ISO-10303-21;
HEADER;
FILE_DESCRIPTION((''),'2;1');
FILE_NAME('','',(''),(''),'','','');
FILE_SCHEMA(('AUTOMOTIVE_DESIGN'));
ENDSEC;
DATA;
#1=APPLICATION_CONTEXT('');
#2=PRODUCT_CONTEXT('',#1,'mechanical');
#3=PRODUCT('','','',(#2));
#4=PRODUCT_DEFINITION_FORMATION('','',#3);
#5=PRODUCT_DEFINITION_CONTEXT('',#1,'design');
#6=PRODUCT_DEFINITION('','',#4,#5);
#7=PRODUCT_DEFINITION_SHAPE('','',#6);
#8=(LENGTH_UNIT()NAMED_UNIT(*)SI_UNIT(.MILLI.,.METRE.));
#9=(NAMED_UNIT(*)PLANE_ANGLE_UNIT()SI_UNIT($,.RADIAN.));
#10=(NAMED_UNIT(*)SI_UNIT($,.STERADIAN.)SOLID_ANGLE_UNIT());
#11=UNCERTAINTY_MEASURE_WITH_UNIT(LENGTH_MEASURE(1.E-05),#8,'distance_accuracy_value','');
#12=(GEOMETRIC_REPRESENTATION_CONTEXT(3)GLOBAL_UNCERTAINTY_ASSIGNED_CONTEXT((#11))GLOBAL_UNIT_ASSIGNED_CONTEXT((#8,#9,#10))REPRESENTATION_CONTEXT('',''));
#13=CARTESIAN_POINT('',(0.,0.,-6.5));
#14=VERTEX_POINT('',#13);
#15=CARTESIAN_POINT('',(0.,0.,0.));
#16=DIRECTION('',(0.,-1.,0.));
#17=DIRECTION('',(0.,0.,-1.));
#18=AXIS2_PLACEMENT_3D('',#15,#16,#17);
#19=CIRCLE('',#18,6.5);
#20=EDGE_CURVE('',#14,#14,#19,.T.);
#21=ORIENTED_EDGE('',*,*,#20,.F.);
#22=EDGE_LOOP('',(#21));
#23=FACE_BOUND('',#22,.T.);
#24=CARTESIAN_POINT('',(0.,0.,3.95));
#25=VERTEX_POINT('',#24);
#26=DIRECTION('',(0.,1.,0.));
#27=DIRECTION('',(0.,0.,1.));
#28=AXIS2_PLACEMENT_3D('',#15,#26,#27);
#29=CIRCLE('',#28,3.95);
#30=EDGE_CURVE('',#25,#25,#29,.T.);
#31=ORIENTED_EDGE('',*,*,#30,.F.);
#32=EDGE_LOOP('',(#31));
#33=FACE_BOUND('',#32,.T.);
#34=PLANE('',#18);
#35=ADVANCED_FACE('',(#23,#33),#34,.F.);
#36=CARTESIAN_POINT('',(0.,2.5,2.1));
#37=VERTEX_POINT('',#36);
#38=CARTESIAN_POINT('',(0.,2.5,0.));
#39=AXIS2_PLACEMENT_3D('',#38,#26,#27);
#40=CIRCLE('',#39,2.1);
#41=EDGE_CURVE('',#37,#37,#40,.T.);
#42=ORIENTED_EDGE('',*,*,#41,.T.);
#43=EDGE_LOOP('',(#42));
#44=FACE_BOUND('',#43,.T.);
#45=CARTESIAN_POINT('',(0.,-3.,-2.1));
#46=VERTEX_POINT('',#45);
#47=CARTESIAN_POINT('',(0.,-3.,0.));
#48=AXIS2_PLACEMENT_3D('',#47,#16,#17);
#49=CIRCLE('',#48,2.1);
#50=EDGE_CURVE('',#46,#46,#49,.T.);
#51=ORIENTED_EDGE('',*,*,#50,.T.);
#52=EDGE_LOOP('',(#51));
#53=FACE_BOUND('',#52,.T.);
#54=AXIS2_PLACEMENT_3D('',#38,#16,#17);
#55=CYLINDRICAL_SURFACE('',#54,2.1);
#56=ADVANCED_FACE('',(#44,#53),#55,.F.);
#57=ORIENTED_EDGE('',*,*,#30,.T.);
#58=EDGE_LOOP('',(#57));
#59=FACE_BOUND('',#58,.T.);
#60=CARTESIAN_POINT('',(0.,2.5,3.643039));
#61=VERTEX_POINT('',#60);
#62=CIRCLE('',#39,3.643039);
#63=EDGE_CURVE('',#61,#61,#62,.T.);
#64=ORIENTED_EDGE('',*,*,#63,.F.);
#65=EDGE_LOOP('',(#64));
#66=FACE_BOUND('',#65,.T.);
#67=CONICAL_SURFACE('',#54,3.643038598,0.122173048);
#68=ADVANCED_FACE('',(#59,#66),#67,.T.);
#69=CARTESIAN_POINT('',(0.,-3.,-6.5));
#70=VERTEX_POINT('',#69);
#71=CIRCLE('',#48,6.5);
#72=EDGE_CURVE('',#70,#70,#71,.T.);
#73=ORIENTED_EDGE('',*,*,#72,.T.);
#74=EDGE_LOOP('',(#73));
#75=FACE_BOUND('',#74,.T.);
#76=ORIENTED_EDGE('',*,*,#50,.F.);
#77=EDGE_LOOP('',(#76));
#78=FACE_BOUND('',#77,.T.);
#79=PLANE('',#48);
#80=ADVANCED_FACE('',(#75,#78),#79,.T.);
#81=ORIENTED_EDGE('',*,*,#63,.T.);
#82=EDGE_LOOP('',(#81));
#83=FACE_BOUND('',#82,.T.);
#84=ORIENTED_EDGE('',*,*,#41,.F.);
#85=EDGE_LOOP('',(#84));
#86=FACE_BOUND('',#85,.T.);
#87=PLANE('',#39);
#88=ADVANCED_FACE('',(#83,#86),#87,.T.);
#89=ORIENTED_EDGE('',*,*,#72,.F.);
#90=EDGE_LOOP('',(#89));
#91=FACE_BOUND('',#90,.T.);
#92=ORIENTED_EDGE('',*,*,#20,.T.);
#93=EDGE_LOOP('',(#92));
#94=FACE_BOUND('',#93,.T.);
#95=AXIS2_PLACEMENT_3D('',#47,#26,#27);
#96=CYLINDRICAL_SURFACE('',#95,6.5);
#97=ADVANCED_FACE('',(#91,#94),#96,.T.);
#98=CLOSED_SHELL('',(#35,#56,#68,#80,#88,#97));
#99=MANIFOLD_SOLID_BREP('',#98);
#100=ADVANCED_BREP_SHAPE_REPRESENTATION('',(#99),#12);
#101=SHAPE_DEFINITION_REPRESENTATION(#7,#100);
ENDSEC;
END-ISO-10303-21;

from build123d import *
from build123d.topology import SkipClean

# Parameters (mm, degrees)
SKETCH1_R           = 3.95
SKETCH1_R_2         = 2.1
BOSS_EXTRUDE1_DEPTH = 2.5
BOSS_EXTRUDE2_START = 3
SKETCH2_R           = 6.5
SKETCH2_R_2         = 2.1
BOSS_EXTRUDE2_DEPTH = 3
CHAMFER1_SIZE       = 2.5
CHAMFER1_SIZE_2     = 0.306961402


with BuildPart() as part:
    # Sketch1 → Boss-Extrude1 (new body)
    with BuildSketch(Plane(origin=(0, 0, 0), x_dir=(1, 0, 0), z_dir=(0, 1, 0))):
        with Locations(Location((0, 0, 0), (0, 0, 270))):
            Circle(SKETCH1_R)
        with Locations(Location((0, 0, 0), (0, 0, 270))):
            Circle(SKETCH1_R_2, mode=Mode.SUBTRACT)
    extrude(amount=BOSS_EXTRUDE1_DEPTH)

    # Sketch2 → Boss-Extrude2 (add)
    with SkipClean():  # the faces are left unmerged after this step: merging them gives an invalid solid
        with BuildSketch(Plane.XZ.offset(BOSS_EXTRUDE2_START)):
            with Locations(Location((0, 0, 0), (0, 0, 270))):
                Circle(SKETCH2_R)
            with Locations(Location((0, 0, 0), (0, 0, 270))):
                Circle(SKETCH2_R_2, mode=Mode.SUBTRACT)
        extrude(amount=-BOSS_EXTRUDE2_DEPTH)

    # Chamfer1
    # the kernel refuses this chamfer: 2.5, 0.306961402 mm, written as the material it takes off along each edge
    with BuildSketch(Plane(origin=(0, 2.5, 0), x_dir=(0, 0, 1), z_dir=(-1, 0, 0))) as chamfer1_piece_1_section:
        Polygon((3.95, -CHAMFER1_SIZE), (3.95 - CHAMFER1_SIZE_2, 0), (3.95, 0), align=None)
    chamfer1_piece_1 = revolve(axis=Axis((0, 2.5, 0), (0, 1, 0)), mode=Mode.PRIVATE)
    chamfer1_piece_1 = split(chamfer1_piece_1, bisect_by=Plane(origin=(0, 0, -3.813772666), z_dir=(0, 1, 0)), keep=Keep.TOP, mode=Mode.PRIVATE)
    add(chamfer1_piece_1, mode=Mode.SUBTRACT)


solid = part.part
